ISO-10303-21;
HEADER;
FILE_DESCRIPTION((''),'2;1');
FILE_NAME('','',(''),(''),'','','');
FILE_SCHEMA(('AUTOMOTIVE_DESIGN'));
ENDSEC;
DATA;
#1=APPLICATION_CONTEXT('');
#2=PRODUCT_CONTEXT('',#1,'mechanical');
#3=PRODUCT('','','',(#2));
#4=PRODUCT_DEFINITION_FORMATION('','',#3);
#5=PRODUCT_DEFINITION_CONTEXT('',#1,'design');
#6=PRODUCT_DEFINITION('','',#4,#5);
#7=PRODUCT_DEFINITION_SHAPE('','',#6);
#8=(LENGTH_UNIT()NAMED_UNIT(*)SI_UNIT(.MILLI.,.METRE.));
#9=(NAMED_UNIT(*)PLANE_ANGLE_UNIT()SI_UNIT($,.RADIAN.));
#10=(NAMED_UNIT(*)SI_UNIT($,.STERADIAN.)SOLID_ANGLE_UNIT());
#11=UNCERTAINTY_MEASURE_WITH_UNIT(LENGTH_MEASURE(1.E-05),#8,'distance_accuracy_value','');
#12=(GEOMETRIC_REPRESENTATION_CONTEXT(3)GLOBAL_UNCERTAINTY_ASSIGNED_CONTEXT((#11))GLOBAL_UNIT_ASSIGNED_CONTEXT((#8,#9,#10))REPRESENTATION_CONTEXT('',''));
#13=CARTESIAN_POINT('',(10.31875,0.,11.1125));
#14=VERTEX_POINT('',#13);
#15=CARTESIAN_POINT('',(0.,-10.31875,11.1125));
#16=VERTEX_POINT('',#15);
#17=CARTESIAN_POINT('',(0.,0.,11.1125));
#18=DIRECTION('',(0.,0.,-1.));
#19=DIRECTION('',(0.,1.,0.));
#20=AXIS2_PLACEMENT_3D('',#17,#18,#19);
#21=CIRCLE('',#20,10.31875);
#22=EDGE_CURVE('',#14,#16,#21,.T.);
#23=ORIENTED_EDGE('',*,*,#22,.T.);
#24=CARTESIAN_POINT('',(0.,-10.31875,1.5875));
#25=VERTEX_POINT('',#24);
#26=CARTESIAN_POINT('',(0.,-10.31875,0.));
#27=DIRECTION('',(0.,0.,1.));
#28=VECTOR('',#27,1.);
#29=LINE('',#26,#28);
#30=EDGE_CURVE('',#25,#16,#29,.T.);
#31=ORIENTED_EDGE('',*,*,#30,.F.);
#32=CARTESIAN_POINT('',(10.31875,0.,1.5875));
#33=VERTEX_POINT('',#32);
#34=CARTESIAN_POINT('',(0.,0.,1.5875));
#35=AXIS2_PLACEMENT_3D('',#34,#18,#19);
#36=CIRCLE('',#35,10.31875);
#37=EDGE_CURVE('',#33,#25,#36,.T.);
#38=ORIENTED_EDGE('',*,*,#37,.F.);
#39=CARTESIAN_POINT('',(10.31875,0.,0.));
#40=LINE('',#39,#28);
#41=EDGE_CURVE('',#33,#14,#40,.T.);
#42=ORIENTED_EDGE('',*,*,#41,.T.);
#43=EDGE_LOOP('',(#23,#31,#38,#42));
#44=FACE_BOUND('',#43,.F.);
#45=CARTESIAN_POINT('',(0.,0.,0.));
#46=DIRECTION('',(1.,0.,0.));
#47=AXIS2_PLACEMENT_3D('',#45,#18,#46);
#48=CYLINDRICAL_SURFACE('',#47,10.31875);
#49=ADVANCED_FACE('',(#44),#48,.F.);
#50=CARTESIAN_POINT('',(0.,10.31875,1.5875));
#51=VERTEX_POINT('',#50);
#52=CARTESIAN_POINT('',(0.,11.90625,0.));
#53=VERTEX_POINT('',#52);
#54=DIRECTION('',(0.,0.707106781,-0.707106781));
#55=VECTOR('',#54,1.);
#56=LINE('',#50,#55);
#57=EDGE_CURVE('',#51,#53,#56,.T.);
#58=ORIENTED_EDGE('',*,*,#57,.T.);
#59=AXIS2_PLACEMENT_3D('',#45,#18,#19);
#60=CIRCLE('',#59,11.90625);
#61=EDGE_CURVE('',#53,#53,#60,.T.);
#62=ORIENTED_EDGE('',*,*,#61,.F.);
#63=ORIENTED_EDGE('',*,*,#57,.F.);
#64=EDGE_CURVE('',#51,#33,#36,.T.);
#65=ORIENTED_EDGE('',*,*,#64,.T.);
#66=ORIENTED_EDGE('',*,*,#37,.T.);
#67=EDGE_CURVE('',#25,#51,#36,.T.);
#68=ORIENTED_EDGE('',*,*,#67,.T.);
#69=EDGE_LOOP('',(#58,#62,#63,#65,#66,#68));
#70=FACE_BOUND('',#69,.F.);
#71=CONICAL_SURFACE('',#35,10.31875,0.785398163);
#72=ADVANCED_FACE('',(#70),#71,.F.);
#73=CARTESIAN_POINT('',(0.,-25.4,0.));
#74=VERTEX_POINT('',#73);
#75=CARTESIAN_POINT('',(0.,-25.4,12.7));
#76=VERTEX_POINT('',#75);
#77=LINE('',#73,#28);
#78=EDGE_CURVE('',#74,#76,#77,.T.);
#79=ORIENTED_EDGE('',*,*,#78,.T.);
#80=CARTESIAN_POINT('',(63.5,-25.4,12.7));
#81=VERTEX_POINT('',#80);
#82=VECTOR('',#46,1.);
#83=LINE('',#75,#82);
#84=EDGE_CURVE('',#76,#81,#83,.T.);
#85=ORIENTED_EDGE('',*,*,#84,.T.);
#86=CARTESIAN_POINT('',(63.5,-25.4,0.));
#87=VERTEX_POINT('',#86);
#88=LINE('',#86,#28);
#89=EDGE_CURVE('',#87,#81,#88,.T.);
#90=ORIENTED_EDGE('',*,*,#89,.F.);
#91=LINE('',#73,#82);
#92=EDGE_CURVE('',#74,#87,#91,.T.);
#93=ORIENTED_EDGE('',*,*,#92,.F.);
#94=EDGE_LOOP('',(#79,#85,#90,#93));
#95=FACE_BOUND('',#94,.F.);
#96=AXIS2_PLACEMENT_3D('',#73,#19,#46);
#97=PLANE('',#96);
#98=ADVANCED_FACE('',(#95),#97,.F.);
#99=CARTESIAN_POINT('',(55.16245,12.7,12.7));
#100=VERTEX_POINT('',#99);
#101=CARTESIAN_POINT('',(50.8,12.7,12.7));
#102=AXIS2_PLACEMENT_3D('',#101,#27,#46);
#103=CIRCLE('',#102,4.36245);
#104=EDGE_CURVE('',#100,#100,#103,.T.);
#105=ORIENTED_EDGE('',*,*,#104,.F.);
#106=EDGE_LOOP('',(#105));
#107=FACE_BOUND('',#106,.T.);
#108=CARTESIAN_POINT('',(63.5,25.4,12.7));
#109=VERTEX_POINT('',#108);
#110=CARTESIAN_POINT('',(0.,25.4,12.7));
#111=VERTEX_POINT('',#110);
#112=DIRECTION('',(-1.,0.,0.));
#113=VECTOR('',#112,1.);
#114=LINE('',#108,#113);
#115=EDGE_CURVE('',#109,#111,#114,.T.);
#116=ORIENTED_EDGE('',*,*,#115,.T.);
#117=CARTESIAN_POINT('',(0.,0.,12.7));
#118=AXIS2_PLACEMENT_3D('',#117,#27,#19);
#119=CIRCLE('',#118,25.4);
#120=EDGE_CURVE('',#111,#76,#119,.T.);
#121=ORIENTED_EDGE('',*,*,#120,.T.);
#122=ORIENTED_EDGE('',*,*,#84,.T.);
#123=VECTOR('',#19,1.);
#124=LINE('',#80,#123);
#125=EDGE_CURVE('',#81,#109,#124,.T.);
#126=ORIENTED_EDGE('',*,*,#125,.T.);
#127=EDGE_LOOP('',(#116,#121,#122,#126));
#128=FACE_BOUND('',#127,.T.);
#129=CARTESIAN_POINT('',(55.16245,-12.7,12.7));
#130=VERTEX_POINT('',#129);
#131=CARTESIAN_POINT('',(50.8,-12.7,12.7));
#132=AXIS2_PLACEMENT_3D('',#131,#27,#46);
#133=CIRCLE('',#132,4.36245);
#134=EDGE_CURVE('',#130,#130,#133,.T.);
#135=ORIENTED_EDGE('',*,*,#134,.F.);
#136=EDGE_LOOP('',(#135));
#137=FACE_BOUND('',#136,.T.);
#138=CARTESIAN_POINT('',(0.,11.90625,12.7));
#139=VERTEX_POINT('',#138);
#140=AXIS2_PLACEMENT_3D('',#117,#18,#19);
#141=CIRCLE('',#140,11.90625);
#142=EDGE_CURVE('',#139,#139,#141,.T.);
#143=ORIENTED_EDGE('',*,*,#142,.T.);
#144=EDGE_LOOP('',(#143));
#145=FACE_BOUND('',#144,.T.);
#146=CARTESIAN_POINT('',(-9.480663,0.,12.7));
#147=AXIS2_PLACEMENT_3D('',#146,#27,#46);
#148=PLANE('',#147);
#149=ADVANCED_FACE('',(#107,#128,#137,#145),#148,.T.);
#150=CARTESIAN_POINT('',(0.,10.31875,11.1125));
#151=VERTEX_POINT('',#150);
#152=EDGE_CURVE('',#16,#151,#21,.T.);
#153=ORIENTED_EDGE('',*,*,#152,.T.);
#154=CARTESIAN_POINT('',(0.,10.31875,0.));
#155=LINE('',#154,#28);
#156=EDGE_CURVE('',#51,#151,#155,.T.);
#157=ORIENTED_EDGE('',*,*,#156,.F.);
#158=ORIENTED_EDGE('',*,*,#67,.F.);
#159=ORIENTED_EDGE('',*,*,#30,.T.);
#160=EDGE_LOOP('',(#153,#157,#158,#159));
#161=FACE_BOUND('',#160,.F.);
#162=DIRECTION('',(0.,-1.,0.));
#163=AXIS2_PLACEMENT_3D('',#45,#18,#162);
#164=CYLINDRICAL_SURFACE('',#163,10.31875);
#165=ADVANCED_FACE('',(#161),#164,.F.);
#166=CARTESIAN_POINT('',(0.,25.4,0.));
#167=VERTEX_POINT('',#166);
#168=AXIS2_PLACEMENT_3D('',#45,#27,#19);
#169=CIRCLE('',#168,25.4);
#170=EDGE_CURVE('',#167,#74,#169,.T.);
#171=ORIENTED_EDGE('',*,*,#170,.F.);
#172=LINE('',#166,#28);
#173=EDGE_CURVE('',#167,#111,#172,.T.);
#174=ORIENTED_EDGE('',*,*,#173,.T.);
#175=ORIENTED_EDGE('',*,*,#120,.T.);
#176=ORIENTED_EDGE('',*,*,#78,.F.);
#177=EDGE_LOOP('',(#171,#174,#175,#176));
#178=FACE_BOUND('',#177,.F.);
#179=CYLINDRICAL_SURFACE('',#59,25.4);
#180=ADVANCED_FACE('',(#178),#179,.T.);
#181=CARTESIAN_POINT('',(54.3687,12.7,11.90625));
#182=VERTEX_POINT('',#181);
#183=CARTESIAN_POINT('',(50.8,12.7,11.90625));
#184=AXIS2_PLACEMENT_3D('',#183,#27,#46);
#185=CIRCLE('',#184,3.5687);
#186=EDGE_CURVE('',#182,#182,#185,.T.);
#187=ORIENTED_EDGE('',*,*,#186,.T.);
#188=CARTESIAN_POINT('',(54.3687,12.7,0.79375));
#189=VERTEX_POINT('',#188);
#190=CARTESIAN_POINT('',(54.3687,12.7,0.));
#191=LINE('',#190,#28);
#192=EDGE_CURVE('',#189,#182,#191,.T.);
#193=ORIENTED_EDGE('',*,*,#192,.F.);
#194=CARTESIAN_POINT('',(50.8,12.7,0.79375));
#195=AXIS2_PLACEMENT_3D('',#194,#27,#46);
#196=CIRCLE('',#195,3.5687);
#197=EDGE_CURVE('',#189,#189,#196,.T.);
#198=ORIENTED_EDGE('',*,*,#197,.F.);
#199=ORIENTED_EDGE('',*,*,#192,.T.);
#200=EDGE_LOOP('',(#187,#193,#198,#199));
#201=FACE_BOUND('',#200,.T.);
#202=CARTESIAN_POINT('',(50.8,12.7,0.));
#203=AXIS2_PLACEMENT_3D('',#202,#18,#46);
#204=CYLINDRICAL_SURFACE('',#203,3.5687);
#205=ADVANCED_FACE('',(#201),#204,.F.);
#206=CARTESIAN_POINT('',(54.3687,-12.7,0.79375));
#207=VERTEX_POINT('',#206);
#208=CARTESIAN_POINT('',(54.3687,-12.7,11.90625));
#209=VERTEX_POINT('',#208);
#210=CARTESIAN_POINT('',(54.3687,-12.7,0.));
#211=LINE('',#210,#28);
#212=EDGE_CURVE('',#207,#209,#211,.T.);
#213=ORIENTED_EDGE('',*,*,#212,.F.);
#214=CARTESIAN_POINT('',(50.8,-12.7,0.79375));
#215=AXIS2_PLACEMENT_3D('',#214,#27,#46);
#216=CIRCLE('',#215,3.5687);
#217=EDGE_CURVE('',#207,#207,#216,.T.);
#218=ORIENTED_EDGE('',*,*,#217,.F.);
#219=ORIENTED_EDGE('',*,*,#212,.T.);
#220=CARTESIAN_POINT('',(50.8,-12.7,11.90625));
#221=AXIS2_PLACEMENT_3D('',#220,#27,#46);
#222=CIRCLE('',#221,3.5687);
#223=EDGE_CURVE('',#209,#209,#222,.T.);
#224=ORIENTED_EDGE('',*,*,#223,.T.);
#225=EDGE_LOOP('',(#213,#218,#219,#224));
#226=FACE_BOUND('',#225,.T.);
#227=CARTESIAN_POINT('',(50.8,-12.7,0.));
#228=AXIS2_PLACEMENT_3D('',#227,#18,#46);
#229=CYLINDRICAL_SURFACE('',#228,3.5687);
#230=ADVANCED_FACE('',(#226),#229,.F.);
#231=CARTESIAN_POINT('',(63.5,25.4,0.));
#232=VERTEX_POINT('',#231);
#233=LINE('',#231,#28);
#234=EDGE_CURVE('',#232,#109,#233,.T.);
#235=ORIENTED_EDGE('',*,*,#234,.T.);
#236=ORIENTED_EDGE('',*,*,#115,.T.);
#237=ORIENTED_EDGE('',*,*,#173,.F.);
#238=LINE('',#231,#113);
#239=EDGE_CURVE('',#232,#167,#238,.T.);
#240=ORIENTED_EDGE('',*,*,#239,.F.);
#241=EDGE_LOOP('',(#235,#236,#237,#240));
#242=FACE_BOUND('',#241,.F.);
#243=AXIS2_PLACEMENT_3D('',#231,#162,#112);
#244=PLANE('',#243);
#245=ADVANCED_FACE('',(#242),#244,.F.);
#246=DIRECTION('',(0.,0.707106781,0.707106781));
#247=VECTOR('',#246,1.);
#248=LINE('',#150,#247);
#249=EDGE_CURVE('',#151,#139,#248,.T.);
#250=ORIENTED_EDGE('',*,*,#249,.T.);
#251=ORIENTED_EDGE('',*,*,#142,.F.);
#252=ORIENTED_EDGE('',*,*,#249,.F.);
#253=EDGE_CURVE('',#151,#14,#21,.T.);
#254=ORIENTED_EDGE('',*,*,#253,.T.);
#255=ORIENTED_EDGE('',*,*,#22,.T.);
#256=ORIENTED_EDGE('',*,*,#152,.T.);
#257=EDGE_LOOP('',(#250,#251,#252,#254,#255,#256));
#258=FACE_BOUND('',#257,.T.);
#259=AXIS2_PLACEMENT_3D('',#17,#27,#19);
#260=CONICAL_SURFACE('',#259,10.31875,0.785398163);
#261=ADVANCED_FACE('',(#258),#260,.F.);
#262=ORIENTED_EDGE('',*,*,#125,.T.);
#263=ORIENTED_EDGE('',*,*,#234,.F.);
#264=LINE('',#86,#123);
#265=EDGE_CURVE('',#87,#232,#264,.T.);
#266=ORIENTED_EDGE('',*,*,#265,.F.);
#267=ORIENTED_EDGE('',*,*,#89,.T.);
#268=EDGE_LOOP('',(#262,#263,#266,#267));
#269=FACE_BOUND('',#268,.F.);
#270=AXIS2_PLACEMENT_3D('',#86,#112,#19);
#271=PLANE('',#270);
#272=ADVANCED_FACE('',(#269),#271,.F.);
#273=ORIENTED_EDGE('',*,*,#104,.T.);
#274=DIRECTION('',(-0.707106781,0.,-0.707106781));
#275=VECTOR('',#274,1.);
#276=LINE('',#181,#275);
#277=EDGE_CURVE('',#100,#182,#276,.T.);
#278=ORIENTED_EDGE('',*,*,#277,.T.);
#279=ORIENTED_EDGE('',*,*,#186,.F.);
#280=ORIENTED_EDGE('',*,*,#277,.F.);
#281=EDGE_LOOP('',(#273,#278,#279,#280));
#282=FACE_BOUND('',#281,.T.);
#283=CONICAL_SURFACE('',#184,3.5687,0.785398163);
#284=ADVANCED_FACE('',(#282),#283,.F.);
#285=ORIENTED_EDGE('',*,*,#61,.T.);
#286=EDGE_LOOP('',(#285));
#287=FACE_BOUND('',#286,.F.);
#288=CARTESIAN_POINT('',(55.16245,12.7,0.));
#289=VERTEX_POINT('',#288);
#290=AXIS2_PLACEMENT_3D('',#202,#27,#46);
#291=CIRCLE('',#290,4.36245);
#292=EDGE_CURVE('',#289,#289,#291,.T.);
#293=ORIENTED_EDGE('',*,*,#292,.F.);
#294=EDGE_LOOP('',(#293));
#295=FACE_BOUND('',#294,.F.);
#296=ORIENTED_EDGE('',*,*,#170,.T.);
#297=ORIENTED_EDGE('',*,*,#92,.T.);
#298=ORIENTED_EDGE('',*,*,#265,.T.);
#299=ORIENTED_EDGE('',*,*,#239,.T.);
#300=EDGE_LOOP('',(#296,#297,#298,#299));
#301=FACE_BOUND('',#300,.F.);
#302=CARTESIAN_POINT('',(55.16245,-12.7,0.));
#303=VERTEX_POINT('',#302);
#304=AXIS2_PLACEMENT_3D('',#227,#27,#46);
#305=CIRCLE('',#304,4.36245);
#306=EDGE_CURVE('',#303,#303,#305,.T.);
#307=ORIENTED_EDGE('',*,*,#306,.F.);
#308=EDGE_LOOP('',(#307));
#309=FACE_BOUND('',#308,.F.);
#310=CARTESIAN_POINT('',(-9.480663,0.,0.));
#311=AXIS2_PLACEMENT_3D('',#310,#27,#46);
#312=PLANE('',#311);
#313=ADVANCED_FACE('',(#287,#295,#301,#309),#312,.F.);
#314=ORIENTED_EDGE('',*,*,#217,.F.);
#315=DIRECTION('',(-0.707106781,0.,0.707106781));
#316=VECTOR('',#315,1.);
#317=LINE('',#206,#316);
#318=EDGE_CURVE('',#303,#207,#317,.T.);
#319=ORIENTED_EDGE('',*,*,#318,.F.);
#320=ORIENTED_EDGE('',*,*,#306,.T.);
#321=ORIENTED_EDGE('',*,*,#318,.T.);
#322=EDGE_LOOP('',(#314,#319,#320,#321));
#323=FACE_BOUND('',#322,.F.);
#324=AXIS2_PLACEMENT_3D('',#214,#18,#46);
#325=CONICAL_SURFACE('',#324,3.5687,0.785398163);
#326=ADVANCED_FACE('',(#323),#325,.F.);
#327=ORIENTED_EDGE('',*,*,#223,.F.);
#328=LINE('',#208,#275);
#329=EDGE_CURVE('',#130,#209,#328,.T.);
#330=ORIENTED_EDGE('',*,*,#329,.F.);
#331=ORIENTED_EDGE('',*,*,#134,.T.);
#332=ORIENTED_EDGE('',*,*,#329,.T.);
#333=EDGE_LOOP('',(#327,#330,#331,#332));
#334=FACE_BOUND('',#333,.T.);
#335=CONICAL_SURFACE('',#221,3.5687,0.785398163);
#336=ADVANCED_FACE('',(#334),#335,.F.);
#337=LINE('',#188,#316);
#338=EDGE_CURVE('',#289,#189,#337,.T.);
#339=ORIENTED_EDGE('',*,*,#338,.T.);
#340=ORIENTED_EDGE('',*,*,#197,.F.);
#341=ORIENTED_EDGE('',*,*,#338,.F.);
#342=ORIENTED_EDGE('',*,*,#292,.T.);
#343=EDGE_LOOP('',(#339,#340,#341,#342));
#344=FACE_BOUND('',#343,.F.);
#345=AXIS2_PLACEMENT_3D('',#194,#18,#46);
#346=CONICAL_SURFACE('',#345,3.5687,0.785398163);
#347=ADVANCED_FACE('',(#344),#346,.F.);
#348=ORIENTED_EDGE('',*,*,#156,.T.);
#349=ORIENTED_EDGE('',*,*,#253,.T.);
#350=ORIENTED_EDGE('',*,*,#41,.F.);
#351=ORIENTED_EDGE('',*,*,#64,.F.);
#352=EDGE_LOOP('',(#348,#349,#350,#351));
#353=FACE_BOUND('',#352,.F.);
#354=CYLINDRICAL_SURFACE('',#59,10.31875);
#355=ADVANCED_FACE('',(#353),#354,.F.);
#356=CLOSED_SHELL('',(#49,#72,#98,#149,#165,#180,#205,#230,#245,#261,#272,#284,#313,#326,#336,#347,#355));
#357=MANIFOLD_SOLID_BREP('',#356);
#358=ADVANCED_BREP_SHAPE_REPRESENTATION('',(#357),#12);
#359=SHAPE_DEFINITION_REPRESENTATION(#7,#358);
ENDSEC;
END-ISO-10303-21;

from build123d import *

# Parameters (mm, degrees)
F0_R     = 3.5687
F1_DEPTH = 12.7
F3_SIZE  = 0.79375


# Not quite as in the source:
# - a fillet or chamfer that OpenCascade refuses, or shapes differently, is made with other operations: its cross-section is extruded or revolved along the edge and cut away or added


with BuildPart() as f1:
    # F0 (on Top) → F1 (new body)
    with BuildSketch(Plane.XY):
        with BuildLine():
            Line((0, 10.31875), (0, 25.4))
            ThreePointArc((0, 25.4), (-25.4, 0), (0, -25.4))
            Line((0, -25.4), (0, -10.31875))
            ThreePointArc((0, -10.31875), (-10.31875, 0), (0, 10.31875))
        make_face()
        with BuildLine():
            ThreePointArc((0, 25.4), (17.9605122421, 17.9605122421), (25.4, 0))
            ThreePointArc((25.4, 0), (17.9605122421, -17.9605122421), (0, -25.4))
            Line((0, -25.4), (63.5, -25.4))
            Line((63.5, -25.4), (63.5, 25.4))
            Line((63.5, 25.4), (0, 25.4))
        make_face()
        with Locations((50.8, -12.7)):
            Circle(F0_R, mode=Mode.SUBTRACT)
        with Locations((50.8, 12.7)):
            Circle(F0_R, mode=Mode.SUBTRACT)
        with BuildLine():
            ThreePointArc((0, -25.4), (17.9605122421, -17.9605122421), (25.4, 0))
            ThreePointArc((25.4, 0), (17.9605122421, 17.9605122421), (0, 25.4))
            Line((0, 25.4), (0, 10.31875))
            ThreePointArc((0, 10.31875), (7.2964580984, 7.2964580984), (10.31875, 0))
            ThreePointArc((10.31875, 0), (7.2964580984, -7.2964580984), (0, -10.31875))
            Line((0, -10.31875), (0, -25.4))
        make_face()
    extrude(amount=F1_DEPTH)

    # F2: chamfer of 1.5875 on 2 edges, made by hand

    # F2_s1 → F2_t2 (revolve, cut)
    with BuildSketch(Plane.YZ):
        Polygon((10.31875, 1.5875), (11.90625, 0), (10.31875, 0), align=None)
    revolve(axis=Axis((0, 0, 0), (0, 0, -1)), mode=Mode.SUBTRACT)

    # F2_s3 → F2_t4 (revolve, cut)
    with BuildSketch(Plane.YZ):
        Polygon((10.31875, 11.1125), (11.90625, 12.7), (10.31875, 12.7), align=None)
    revolve(axis=Axis((0, 0, 12.7), (0, 0, -1)), mode=Mode.SUBTRACT)

    # F3
    f3_edges = [f1.edges().sort_by_distance(p)[0] for p in [
        (47.2313, -12.7, 0),
        (47.2313, 12.7, 0),
        (47.2313, -12.7, 12.7),
        (47.2313, 12.7, 12.7),
    ]]
    chamfer(f3_edges, length=F3_SIZE)


solid = f1.part
